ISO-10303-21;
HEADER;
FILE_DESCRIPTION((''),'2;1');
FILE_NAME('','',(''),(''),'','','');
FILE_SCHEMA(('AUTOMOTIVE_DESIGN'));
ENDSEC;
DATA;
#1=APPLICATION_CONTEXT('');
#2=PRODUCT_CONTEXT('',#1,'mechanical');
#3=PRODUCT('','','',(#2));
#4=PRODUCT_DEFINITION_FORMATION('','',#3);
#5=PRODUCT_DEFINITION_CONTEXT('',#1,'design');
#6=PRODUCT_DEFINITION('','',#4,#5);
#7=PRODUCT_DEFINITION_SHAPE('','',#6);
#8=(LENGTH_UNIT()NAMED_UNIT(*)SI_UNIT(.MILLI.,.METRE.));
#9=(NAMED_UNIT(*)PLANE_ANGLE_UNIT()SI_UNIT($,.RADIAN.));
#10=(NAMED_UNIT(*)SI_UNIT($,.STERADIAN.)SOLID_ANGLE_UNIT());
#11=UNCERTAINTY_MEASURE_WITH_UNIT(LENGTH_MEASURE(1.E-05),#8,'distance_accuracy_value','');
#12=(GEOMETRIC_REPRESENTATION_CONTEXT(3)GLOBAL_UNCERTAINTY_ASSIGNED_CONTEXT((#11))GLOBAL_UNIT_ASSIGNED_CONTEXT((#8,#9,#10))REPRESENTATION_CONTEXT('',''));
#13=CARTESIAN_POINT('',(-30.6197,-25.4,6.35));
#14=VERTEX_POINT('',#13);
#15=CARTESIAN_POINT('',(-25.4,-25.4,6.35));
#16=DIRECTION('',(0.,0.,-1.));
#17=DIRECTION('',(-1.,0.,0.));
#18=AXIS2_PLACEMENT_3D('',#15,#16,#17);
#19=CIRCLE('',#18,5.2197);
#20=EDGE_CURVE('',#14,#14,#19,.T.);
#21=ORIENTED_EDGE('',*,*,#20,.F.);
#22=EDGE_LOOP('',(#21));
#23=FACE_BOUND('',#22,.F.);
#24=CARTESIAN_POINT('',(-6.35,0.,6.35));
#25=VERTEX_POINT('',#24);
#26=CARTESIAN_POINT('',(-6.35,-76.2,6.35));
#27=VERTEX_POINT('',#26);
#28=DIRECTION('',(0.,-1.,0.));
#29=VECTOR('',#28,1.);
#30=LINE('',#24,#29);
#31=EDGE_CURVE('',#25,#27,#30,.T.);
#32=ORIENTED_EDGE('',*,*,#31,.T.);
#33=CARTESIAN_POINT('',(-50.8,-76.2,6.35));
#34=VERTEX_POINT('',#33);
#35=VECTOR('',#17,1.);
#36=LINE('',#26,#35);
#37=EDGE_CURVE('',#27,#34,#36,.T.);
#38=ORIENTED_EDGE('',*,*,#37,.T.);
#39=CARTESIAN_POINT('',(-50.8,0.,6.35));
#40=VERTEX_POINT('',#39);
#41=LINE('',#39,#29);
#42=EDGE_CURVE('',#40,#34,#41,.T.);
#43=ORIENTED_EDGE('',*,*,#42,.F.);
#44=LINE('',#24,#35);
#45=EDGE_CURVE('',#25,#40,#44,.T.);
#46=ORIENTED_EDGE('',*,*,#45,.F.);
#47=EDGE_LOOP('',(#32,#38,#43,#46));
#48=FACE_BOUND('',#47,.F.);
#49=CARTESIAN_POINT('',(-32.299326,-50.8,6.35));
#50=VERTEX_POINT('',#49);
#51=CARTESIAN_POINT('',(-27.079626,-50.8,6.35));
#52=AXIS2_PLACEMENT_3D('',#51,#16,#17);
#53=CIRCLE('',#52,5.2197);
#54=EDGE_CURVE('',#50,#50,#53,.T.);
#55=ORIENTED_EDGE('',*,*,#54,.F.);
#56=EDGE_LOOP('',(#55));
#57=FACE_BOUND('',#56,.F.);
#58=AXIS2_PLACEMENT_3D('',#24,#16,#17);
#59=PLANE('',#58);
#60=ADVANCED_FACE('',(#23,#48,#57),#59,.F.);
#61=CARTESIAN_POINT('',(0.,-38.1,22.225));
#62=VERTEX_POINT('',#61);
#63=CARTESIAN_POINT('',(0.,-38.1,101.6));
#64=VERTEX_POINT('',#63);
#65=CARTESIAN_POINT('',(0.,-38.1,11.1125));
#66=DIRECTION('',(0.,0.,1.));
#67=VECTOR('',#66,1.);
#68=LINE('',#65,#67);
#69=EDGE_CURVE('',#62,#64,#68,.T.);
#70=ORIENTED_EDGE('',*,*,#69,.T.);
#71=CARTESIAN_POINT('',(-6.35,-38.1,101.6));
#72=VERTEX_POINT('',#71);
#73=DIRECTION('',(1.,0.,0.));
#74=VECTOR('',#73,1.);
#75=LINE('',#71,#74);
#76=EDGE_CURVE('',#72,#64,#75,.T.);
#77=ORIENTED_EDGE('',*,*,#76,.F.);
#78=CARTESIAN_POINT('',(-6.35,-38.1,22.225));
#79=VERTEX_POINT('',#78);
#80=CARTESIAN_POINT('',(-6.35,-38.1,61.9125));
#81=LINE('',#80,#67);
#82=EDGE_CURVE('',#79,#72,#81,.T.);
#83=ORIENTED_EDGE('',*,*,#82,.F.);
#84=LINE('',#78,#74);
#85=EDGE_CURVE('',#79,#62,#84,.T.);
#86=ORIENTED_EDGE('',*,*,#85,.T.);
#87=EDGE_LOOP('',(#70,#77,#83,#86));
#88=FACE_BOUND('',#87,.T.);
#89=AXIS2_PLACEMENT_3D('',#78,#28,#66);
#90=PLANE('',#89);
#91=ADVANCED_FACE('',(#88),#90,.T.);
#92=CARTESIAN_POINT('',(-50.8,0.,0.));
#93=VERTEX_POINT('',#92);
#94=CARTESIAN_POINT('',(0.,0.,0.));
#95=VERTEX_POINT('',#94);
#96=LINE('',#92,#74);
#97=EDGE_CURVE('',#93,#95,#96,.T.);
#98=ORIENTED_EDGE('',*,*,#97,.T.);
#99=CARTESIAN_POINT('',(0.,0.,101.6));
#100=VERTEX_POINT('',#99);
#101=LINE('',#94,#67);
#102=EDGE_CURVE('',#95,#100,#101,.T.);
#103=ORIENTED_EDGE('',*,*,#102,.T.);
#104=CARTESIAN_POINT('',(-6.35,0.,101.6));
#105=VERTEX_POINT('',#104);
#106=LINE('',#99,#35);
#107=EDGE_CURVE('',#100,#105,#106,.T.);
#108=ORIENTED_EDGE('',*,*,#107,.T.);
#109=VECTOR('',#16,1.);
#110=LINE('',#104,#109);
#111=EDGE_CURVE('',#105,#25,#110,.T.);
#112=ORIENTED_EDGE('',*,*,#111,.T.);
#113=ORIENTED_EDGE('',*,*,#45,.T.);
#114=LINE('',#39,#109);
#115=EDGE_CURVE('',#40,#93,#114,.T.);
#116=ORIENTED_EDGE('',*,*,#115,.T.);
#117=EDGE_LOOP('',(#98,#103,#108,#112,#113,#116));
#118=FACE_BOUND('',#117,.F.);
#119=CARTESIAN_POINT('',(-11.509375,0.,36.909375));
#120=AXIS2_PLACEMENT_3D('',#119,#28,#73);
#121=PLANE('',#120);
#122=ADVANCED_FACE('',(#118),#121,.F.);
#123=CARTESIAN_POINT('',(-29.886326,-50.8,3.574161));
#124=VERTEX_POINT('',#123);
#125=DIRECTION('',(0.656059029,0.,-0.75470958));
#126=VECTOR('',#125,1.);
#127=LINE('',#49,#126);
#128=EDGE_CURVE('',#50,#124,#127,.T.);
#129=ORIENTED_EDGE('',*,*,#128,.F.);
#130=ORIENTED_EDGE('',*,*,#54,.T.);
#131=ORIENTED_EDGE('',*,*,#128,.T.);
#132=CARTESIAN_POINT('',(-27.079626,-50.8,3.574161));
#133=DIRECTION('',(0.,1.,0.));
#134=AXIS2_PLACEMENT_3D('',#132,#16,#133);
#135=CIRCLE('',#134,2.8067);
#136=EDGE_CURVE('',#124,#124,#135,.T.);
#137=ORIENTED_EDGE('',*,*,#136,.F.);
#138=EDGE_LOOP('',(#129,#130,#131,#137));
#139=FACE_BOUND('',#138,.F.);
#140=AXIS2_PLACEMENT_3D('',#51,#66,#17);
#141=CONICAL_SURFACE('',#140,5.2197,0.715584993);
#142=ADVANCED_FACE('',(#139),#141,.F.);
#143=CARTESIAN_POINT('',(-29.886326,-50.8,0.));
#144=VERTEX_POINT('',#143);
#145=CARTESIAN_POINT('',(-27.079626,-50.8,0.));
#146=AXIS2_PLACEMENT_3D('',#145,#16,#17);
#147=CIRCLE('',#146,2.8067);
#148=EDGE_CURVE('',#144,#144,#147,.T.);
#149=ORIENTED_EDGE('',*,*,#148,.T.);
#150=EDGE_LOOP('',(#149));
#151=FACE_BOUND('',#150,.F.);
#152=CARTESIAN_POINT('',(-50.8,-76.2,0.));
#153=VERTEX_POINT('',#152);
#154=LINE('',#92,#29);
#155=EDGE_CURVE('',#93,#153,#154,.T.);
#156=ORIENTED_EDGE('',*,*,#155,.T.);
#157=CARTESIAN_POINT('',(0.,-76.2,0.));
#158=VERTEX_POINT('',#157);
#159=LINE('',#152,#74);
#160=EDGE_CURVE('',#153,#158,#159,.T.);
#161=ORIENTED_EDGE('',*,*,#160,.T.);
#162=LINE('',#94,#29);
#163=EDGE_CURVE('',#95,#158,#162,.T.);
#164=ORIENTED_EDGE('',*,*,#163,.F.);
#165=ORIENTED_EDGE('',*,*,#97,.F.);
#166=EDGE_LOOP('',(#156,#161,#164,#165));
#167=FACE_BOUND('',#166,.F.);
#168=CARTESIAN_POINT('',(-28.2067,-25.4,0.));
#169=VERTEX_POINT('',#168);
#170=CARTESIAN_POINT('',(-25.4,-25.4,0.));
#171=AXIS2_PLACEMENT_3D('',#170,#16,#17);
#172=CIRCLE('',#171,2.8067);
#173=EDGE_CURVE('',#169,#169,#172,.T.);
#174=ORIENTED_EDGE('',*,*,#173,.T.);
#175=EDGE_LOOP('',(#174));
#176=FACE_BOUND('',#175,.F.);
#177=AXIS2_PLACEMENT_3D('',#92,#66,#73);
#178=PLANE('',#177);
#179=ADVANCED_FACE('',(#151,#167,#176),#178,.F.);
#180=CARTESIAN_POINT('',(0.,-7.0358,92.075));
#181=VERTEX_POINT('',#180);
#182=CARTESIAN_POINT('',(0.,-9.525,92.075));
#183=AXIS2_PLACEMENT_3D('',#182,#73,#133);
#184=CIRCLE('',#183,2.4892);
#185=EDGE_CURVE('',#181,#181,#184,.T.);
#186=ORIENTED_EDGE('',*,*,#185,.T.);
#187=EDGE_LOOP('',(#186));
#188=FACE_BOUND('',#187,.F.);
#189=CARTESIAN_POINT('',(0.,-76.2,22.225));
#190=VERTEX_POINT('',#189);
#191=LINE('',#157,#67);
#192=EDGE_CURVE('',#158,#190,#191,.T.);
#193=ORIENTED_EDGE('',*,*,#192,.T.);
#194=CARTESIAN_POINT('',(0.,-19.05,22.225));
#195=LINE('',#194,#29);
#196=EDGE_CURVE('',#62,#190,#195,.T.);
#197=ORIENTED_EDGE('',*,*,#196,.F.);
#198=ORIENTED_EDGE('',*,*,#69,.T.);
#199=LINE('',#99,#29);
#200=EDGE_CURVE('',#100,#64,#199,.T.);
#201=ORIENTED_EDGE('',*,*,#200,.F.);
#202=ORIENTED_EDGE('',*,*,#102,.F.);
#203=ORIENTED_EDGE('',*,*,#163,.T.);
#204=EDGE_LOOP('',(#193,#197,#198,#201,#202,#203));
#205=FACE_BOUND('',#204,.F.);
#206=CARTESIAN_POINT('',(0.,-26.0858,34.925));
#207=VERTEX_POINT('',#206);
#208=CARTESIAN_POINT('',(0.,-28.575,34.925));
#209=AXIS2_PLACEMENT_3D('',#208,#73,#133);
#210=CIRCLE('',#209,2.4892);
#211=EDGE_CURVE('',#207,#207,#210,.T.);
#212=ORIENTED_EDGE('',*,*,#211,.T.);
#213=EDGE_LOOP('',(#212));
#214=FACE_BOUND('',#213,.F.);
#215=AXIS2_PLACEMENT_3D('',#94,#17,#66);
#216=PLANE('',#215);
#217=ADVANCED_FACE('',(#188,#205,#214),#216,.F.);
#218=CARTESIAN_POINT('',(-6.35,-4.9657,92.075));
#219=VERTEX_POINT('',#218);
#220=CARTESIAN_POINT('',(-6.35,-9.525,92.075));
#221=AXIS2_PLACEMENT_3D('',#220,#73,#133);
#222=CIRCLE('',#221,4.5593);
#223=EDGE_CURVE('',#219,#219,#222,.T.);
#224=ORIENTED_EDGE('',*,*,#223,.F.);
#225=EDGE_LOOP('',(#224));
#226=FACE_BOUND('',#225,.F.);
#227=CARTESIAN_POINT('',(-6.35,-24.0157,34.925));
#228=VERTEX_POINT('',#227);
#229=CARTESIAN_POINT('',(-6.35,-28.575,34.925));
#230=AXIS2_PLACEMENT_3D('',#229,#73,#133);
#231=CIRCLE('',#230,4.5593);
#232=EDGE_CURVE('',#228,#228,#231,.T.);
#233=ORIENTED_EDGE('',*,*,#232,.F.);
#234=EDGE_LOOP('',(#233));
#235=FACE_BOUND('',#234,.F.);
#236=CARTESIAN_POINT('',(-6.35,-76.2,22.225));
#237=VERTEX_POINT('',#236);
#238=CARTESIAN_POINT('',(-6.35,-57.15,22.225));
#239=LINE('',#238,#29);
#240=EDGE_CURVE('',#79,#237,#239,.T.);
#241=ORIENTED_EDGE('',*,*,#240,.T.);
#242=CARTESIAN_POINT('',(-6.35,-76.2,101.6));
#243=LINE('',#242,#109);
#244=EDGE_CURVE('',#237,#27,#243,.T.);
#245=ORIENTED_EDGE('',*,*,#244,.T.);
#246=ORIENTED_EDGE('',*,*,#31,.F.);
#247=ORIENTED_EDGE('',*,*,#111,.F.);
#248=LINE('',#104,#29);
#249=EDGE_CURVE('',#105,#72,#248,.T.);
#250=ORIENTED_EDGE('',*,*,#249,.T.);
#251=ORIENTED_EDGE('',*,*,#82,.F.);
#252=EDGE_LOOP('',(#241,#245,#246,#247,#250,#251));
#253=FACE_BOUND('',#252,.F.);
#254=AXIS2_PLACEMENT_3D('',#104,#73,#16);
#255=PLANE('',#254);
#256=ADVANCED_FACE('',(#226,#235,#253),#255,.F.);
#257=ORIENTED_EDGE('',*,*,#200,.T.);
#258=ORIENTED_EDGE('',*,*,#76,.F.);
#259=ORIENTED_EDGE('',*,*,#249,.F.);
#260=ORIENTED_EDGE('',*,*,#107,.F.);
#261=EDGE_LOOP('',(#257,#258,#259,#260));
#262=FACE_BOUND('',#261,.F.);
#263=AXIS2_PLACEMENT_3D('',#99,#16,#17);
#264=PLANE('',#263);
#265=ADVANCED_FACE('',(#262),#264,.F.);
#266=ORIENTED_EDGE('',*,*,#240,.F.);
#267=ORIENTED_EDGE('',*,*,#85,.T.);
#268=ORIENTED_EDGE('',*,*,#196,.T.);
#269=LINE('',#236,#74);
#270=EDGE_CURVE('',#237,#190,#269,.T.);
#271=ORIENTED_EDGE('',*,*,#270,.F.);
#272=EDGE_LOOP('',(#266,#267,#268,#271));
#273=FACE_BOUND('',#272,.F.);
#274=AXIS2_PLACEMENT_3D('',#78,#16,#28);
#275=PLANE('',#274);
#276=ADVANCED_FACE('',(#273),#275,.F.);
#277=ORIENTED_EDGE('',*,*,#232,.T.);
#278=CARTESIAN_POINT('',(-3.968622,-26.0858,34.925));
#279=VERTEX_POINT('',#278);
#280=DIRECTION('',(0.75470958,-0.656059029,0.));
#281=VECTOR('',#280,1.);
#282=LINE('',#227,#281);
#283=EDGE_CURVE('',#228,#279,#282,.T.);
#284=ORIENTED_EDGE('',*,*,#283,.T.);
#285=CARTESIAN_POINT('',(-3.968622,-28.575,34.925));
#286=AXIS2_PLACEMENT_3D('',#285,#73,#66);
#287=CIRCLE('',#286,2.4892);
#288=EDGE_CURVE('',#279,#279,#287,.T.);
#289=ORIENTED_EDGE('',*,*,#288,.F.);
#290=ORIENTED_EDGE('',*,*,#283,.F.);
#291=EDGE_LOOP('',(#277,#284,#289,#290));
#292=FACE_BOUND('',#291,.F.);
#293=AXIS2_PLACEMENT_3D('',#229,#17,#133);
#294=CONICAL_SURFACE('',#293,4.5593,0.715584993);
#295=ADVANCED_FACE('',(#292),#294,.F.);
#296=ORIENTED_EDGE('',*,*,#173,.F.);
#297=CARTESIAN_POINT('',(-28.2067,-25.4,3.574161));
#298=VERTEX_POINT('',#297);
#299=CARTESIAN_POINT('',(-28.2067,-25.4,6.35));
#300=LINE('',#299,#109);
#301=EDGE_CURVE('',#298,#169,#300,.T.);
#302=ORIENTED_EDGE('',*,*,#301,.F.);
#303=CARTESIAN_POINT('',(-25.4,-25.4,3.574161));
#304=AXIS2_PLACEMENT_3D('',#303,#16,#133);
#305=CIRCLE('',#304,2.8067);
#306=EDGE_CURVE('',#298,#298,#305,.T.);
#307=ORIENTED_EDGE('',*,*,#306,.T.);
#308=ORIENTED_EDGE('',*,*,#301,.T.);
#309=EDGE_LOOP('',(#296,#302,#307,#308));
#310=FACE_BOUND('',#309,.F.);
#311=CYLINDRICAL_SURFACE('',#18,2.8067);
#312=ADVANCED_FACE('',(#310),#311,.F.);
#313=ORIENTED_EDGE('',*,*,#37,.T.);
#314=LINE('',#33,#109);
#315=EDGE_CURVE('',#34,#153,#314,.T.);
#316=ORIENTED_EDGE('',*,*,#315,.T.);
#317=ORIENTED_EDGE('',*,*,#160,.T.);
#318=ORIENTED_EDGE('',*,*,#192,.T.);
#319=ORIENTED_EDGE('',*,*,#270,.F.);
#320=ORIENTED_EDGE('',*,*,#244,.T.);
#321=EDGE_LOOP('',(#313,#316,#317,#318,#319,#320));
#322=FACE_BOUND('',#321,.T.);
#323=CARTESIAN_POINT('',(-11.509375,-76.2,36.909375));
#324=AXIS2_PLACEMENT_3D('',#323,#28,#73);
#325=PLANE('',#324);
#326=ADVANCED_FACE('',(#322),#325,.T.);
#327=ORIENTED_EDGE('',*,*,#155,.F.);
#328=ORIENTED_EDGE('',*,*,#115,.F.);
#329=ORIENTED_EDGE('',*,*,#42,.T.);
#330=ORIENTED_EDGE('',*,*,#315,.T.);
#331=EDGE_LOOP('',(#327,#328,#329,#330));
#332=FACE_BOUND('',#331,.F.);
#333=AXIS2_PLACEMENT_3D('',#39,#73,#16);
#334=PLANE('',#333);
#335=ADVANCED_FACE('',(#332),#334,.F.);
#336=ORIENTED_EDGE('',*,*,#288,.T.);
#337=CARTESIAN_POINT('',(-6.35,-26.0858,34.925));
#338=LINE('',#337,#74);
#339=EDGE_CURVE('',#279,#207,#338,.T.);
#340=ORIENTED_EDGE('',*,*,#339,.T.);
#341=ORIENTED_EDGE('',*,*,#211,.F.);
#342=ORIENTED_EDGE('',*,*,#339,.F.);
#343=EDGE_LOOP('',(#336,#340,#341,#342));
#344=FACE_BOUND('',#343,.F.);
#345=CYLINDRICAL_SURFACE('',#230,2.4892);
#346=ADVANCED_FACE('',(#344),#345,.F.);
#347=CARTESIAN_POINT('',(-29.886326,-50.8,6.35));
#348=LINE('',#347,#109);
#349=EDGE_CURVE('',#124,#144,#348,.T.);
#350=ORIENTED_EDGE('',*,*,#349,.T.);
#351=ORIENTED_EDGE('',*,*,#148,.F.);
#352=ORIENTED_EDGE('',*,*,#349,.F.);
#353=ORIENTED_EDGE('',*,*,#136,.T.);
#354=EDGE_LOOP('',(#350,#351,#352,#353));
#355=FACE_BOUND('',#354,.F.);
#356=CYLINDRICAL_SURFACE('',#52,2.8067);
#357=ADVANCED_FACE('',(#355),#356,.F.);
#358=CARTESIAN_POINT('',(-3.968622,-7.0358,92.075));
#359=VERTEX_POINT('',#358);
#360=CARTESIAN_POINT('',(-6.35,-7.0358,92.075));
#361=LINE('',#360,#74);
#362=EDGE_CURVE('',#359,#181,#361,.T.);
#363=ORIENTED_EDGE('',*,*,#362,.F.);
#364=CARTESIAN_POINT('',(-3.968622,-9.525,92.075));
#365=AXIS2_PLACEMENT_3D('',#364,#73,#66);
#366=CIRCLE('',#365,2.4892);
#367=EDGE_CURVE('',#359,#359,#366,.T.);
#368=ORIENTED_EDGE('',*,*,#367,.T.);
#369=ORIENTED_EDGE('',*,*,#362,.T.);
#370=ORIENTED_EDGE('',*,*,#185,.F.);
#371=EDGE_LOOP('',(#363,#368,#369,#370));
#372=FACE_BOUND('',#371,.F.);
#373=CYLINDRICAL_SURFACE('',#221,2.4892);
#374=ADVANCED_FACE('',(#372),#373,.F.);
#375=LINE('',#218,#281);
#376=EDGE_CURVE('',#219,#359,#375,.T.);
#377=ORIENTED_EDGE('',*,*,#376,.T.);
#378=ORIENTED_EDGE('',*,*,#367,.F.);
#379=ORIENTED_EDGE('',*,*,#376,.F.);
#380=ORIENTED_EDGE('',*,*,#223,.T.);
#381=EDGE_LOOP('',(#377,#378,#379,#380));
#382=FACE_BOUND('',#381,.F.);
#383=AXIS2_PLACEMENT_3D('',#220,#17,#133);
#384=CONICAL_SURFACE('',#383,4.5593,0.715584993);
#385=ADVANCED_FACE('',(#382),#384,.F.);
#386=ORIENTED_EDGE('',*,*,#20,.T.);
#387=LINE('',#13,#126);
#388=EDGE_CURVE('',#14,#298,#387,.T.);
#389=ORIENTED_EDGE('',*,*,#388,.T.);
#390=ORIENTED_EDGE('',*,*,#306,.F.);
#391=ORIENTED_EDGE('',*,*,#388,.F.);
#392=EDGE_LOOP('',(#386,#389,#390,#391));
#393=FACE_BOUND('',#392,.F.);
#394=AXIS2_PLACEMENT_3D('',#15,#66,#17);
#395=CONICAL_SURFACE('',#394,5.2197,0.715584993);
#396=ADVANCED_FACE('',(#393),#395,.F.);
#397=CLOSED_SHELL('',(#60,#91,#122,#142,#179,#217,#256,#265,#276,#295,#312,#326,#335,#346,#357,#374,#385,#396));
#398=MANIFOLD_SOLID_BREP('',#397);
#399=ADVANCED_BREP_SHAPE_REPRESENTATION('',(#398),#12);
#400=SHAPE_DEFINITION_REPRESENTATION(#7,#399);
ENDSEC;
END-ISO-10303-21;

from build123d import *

# Parameters (mm, degrees)
F1_DEPTH       = 76.2
F3_D           = 4.9784
F3_CSINK_D     = 9.1186
F3_CSINK_ANGLE = 82
F5_D           = 5.6134
F5_CSINK_D     = 10.4394
F5_CSINK_ANGLE = 82
F6_W           = 38.1
F6_H           = 79.375
F7_DEPTH       = 6.351


# Not quite as in the source:
# - a feature names something its author has since deleted; it is built from what else it names


with BuildPart() as f1:
    # F0 (on Front) → F1 (new body)
    with BuildSketch(Plane.XZ):
        Polygon((-50.8, 0), (0, 0), (0, 101.6), (-6.35, 101.6), (-6.35, 6.35), (-50.8, 6.35), align=None)
    extrude(amount=F1_DEPTH)

    # F3 (through all)
    with Locations(Plane(origin=(-6.35, 0, 0), x_dir=(0, -1, 0), z_dir=(-1, 0, 0))):
        with Locations((9.525, 92.075), (28.575, 34.925)):
            CounterSinkHole(F3_D / 2, F3_CSINK_D / 2, counter_sink_angle=F3_CSINK_ANGLE)

    # F5 (through all)
    with Locations(Plane.XY.offset(6.35)):
        with Locations((-25.4, -25.4), (-27.0796256672, -50.8)):
            CounterSinkHole(F5_D / 2, F5_CSINK_D / 2, counter_sink_angle=F5_CSINK_ANGLE)

    # F6 (on face) → F7 (cut, through all)
    with BuildSketch(Plane(origin=(-6.35, 0, 0), x_dir=(0, -1, 0), z_dir=(-1, 0, 0))):
        with Locations((57.15, 61.9125)):
            Rectangle(F6_W, F6_H)
    extrude(amount=-F7_DEPTH, mode=Mode.SUBTRACT)


solid = f1.part
